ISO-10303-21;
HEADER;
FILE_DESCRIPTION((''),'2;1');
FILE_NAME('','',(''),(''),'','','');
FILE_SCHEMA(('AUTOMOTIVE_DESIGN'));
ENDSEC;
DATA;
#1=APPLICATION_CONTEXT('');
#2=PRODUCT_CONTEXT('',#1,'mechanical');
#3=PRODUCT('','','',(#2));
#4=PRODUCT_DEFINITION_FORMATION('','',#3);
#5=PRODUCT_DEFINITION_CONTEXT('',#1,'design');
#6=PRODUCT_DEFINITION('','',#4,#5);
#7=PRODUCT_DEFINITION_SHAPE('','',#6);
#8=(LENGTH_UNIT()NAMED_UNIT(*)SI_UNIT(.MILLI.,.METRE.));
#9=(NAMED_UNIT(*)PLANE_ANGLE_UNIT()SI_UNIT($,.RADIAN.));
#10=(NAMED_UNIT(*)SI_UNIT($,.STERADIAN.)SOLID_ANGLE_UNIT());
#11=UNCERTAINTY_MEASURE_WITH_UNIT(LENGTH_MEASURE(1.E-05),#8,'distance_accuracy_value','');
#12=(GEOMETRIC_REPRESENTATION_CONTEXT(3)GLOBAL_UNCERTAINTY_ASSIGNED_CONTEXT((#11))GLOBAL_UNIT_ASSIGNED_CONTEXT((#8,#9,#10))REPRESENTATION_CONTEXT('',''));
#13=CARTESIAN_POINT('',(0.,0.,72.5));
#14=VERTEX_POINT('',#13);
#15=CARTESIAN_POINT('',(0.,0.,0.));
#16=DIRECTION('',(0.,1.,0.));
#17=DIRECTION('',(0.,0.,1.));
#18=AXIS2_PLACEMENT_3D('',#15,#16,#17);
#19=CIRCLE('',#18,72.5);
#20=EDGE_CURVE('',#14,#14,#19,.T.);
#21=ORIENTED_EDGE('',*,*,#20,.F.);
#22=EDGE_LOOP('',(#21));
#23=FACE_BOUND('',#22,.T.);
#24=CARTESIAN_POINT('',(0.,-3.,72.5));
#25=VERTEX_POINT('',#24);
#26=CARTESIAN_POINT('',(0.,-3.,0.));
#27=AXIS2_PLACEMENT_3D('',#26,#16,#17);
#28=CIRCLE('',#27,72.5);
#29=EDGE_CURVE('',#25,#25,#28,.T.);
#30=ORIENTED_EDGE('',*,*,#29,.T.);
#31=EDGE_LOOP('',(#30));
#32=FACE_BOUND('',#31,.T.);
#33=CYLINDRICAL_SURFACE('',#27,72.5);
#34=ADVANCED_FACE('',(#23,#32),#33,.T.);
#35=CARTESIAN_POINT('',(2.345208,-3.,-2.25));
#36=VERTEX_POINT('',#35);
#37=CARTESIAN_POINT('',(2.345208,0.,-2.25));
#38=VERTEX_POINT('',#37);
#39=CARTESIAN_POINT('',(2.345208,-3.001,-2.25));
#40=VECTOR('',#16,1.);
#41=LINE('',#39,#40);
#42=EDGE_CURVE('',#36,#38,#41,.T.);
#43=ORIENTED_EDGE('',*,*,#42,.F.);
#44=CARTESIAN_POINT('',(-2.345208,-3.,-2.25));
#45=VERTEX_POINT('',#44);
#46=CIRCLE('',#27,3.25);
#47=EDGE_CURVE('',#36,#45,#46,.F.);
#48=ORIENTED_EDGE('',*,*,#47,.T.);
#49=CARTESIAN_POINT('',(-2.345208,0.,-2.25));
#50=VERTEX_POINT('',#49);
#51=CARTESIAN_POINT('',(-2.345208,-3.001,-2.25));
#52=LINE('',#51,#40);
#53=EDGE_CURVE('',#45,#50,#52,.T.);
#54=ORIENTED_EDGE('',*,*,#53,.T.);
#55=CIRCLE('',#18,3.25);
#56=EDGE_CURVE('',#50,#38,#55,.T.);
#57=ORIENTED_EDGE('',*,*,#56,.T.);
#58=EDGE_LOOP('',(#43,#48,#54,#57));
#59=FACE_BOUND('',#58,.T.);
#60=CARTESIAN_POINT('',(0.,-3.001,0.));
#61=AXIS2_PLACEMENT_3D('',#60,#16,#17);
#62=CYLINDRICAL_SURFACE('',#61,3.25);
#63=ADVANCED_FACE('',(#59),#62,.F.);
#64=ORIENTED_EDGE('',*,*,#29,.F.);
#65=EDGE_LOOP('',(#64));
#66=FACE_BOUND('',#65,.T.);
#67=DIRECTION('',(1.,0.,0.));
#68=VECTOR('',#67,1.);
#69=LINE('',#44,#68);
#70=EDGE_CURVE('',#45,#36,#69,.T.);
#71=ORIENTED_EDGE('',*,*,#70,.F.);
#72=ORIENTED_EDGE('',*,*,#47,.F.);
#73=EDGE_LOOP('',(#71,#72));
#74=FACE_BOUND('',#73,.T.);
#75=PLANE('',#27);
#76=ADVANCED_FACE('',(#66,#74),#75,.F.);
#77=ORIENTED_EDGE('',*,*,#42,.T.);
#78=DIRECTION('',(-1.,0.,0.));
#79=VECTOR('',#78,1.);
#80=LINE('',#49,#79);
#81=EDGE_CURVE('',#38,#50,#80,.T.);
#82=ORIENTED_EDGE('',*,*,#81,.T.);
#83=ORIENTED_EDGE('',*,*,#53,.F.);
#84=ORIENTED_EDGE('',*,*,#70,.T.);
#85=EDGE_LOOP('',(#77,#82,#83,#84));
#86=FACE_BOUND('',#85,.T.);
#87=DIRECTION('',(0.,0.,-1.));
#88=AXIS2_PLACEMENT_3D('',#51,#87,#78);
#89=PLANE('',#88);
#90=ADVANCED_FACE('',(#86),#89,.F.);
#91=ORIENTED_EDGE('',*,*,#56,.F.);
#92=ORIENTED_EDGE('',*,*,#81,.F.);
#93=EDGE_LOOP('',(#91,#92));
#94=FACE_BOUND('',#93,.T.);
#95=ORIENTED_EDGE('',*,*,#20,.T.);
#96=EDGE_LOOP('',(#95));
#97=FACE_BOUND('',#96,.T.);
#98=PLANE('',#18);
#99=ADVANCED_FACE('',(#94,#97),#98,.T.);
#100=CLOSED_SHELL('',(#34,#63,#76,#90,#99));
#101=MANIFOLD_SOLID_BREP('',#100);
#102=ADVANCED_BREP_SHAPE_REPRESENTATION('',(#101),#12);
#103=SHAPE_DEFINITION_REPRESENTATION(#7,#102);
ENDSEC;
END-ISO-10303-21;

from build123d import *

# Parameters (mm, degrees)
SKETCH1_R          = 72.5
BASE_FLANGE1_DEPTH = 3
CUT_EXTRUDE1_REACH = 104.574


# Sheet-metal steps are written as plain solids
with BuildPart() as part:
    # Sketch1 → Base-Flange1 (new body)
    with BuildSketch(Plane(origin=(0, 0, 0), x_dir=(1, 0, 0), z_dir=(0, 1, 0))):
        with Locations(Location((0, 0, 0), (0, 0, 270))):
            Circle(SKETCH1_R)
    extrude(amount=-BASE_FLANGE1_DEPTH)

    # Sketch6 → Cut-Extrude1 (cut, up to next)
    with BuildSketch(Plane(origin=(0, 0, 0), x_dir=(1, 0, 0), z_dir=(0, 1, 0)), mode=Mode.PRIVATE) as cut_extrude1_sk1:
        with BuildLine():
            Line((-2.34520788, 2.25), (2.34520788, 2.25))
            ThreePointArc((2.34520788, 2.25), (0, -3.25), (-2.34520788, 2.25))
        make_face()
    cut_extrude1_tool1 = extrude(cut_extrude1_sk1.sketch, amount=-CUT_EXTRUDE1_REACH, mode=Mode.PRIVATE) & part.part
    add(cut_extrude1_tool1.solids().sort_by_distance((0, 0, 0.287161))[0], mode=Mode.SUBTRACT)


solid = part.part
